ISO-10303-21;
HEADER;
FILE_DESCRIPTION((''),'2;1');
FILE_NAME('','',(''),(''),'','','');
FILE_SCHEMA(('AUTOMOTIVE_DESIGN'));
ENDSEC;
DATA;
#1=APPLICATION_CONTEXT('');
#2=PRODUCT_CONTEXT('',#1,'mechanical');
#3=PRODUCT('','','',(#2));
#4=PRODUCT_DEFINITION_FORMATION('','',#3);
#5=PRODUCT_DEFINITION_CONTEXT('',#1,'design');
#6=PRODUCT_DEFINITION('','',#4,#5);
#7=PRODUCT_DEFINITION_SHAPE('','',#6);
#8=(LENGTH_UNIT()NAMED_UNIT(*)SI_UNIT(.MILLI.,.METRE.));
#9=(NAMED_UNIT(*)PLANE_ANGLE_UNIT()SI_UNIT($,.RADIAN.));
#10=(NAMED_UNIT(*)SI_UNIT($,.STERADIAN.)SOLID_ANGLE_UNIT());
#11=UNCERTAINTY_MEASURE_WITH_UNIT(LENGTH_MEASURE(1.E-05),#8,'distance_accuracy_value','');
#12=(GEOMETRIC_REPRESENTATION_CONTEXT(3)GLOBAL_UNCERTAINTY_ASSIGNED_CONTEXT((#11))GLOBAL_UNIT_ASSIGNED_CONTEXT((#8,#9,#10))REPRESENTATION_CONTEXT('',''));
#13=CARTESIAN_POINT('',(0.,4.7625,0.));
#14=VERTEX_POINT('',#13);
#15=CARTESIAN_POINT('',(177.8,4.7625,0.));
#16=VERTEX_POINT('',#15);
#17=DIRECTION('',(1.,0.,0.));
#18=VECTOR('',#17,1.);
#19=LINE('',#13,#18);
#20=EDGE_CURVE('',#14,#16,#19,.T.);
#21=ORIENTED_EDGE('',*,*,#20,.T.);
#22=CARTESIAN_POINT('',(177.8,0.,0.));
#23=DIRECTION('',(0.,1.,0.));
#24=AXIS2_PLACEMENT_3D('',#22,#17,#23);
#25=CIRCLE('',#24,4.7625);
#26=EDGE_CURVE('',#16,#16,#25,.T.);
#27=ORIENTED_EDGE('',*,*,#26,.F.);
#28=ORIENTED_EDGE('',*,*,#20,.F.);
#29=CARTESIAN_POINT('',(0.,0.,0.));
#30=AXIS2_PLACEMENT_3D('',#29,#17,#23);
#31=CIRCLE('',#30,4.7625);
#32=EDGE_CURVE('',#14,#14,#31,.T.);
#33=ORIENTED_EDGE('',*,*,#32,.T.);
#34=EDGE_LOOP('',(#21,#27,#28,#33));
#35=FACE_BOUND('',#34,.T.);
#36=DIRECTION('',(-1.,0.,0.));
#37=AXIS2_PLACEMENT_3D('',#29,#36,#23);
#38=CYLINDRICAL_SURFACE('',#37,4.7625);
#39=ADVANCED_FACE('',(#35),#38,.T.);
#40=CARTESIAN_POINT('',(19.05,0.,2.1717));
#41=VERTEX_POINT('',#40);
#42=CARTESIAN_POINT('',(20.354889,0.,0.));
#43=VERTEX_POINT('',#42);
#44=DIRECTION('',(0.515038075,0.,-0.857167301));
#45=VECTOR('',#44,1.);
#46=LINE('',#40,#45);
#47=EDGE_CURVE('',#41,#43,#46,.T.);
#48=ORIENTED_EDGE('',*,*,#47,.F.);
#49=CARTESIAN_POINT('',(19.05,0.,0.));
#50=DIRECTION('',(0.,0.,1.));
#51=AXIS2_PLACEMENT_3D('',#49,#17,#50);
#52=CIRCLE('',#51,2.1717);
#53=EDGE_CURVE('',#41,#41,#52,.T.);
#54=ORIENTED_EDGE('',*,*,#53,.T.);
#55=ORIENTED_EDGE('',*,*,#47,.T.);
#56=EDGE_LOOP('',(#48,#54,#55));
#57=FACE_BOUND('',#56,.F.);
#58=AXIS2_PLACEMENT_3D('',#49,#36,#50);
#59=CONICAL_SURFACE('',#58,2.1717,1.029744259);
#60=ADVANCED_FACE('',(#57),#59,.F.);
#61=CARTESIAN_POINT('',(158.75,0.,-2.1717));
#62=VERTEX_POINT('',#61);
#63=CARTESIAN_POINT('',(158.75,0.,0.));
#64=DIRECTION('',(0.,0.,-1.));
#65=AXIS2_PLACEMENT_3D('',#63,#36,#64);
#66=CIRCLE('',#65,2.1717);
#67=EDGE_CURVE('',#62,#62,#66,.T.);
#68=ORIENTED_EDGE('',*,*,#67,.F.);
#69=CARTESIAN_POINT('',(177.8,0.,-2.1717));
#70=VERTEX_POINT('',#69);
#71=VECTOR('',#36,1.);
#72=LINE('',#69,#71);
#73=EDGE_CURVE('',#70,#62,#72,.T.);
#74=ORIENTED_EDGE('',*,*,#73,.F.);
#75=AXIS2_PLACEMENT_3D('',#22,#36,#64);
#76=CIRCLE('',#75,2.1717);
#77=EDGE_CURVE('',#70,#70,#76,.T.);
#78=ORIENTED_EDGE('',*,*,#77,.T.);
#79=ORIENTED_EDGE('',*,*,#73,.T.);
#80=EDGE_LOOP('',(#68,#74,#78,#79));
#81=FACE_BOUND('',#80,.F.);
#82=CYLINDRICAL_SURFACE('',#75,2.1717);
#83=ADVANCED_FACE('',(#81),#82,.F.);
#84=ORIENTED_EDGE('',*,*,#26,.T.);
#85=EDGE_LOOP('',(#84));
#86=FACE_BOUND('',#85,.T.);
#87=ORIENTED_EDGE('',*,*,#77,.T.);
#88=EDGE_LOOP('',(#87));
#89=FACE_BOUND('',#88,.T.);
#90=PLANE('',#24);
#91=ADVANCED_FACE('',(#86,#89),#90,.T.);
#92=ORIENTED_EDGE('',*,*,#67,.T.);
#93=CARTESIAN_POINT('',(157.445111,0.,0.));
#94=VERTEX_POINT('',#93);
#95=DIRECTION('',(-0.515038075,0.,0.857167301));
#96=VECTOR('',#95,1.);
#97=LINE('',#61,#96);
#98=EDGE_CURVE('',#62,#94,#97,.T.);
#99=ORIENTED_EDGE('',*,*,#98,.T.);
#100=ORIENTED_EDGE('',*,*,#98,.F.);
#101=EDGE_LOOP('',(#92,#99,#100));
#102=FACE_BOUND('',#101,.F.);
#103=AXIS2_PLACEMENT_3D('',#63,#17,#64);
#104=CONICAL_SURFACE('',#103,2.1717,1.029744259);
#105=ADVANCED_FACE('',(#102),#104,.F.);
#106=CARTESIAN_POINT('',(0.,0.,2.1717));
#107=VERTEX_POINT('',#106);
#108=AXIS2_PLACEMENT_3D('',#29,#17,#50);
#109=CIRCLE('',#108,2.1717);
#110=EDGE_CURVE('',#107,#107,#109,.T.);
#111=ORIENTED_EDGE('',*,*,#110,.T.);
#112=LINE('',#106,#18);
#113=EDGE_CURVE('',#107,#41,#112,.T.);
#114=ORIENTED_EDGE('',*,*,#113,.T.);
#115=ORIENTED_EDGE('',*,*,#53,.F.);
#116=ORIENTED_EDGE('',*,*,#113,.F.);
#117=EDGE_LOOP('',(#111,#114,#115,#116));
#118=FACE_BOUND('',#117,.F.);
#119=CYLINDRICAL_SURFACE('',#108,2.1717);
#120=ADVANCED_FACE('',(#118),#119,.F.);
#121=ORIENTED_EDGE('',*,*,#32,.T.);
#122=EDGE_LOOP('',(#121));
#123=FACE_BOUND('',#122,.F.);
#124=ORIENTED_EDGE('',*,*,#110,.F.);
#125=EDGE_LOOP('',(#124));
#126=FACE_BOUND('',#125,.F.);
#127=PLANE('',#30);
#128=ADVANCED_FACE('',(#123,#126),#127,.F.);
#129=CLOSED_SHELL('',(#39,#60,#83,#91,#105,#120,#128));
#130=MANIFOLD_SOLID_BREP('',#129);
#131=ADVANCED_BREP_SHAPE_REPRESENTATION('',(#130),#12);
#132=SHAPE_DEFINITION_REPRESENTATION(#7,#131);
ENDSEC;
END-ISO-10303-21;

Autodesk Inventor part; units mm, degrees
ref_plane "YZ Plane" through (0, 0, 0) normal (1, 0, 0) x (0, 1, 0)
ref_plane "XZ Plane" through (0, 0, 0) normal (0, 1, 0) x (-1, 0, 0)
ref_plane "XY Plane" through (0, 0, 0) normal (0, 0, 1) x (1, 0, 0)
sketch "Sketch1" plane through (0, 0, 0) normal (1, 0, 0) x (0, 1, 0)
  circle A0 centre (0, 0) radius 4.7625
  dimension "d0" = 9.525
extrude "Extrusion1" add sketch "Sketch1" along normal blind 177.8
sketch "Sketch2" plane through (177.8, 0, 0) normal (1, 0, 0) x (0, 0, -1)
  circle A0 centre (0, 0) radius 4.7625 projected
hole "Hole1" at (177.8, 0, 0) direction (-1, 0, 0) diameter 4.3434 depth 19.05 tip angle 118 thread size "12-24 UNC" class "2B" standard "ANSI Unified Screw Threads"
sketch "Sketch3" plane through (0, 0, 0) normal (-1, 0, 0) x (0, 0, 1)
  circle A0 centre (0, 0) radius 2.1717 projected
hole "Hole2" at (0, 0, 0) direction (1, 0, 0) diameter 4.3434 depth 19.05 tip angle 118 thread size "12-24 UNC" class "2B" standard "ANSI Unified Screw Threads"
properties part number "STOCK,HOOD,SPACER,10-32,6.25in" material "Aluminum 6061"
